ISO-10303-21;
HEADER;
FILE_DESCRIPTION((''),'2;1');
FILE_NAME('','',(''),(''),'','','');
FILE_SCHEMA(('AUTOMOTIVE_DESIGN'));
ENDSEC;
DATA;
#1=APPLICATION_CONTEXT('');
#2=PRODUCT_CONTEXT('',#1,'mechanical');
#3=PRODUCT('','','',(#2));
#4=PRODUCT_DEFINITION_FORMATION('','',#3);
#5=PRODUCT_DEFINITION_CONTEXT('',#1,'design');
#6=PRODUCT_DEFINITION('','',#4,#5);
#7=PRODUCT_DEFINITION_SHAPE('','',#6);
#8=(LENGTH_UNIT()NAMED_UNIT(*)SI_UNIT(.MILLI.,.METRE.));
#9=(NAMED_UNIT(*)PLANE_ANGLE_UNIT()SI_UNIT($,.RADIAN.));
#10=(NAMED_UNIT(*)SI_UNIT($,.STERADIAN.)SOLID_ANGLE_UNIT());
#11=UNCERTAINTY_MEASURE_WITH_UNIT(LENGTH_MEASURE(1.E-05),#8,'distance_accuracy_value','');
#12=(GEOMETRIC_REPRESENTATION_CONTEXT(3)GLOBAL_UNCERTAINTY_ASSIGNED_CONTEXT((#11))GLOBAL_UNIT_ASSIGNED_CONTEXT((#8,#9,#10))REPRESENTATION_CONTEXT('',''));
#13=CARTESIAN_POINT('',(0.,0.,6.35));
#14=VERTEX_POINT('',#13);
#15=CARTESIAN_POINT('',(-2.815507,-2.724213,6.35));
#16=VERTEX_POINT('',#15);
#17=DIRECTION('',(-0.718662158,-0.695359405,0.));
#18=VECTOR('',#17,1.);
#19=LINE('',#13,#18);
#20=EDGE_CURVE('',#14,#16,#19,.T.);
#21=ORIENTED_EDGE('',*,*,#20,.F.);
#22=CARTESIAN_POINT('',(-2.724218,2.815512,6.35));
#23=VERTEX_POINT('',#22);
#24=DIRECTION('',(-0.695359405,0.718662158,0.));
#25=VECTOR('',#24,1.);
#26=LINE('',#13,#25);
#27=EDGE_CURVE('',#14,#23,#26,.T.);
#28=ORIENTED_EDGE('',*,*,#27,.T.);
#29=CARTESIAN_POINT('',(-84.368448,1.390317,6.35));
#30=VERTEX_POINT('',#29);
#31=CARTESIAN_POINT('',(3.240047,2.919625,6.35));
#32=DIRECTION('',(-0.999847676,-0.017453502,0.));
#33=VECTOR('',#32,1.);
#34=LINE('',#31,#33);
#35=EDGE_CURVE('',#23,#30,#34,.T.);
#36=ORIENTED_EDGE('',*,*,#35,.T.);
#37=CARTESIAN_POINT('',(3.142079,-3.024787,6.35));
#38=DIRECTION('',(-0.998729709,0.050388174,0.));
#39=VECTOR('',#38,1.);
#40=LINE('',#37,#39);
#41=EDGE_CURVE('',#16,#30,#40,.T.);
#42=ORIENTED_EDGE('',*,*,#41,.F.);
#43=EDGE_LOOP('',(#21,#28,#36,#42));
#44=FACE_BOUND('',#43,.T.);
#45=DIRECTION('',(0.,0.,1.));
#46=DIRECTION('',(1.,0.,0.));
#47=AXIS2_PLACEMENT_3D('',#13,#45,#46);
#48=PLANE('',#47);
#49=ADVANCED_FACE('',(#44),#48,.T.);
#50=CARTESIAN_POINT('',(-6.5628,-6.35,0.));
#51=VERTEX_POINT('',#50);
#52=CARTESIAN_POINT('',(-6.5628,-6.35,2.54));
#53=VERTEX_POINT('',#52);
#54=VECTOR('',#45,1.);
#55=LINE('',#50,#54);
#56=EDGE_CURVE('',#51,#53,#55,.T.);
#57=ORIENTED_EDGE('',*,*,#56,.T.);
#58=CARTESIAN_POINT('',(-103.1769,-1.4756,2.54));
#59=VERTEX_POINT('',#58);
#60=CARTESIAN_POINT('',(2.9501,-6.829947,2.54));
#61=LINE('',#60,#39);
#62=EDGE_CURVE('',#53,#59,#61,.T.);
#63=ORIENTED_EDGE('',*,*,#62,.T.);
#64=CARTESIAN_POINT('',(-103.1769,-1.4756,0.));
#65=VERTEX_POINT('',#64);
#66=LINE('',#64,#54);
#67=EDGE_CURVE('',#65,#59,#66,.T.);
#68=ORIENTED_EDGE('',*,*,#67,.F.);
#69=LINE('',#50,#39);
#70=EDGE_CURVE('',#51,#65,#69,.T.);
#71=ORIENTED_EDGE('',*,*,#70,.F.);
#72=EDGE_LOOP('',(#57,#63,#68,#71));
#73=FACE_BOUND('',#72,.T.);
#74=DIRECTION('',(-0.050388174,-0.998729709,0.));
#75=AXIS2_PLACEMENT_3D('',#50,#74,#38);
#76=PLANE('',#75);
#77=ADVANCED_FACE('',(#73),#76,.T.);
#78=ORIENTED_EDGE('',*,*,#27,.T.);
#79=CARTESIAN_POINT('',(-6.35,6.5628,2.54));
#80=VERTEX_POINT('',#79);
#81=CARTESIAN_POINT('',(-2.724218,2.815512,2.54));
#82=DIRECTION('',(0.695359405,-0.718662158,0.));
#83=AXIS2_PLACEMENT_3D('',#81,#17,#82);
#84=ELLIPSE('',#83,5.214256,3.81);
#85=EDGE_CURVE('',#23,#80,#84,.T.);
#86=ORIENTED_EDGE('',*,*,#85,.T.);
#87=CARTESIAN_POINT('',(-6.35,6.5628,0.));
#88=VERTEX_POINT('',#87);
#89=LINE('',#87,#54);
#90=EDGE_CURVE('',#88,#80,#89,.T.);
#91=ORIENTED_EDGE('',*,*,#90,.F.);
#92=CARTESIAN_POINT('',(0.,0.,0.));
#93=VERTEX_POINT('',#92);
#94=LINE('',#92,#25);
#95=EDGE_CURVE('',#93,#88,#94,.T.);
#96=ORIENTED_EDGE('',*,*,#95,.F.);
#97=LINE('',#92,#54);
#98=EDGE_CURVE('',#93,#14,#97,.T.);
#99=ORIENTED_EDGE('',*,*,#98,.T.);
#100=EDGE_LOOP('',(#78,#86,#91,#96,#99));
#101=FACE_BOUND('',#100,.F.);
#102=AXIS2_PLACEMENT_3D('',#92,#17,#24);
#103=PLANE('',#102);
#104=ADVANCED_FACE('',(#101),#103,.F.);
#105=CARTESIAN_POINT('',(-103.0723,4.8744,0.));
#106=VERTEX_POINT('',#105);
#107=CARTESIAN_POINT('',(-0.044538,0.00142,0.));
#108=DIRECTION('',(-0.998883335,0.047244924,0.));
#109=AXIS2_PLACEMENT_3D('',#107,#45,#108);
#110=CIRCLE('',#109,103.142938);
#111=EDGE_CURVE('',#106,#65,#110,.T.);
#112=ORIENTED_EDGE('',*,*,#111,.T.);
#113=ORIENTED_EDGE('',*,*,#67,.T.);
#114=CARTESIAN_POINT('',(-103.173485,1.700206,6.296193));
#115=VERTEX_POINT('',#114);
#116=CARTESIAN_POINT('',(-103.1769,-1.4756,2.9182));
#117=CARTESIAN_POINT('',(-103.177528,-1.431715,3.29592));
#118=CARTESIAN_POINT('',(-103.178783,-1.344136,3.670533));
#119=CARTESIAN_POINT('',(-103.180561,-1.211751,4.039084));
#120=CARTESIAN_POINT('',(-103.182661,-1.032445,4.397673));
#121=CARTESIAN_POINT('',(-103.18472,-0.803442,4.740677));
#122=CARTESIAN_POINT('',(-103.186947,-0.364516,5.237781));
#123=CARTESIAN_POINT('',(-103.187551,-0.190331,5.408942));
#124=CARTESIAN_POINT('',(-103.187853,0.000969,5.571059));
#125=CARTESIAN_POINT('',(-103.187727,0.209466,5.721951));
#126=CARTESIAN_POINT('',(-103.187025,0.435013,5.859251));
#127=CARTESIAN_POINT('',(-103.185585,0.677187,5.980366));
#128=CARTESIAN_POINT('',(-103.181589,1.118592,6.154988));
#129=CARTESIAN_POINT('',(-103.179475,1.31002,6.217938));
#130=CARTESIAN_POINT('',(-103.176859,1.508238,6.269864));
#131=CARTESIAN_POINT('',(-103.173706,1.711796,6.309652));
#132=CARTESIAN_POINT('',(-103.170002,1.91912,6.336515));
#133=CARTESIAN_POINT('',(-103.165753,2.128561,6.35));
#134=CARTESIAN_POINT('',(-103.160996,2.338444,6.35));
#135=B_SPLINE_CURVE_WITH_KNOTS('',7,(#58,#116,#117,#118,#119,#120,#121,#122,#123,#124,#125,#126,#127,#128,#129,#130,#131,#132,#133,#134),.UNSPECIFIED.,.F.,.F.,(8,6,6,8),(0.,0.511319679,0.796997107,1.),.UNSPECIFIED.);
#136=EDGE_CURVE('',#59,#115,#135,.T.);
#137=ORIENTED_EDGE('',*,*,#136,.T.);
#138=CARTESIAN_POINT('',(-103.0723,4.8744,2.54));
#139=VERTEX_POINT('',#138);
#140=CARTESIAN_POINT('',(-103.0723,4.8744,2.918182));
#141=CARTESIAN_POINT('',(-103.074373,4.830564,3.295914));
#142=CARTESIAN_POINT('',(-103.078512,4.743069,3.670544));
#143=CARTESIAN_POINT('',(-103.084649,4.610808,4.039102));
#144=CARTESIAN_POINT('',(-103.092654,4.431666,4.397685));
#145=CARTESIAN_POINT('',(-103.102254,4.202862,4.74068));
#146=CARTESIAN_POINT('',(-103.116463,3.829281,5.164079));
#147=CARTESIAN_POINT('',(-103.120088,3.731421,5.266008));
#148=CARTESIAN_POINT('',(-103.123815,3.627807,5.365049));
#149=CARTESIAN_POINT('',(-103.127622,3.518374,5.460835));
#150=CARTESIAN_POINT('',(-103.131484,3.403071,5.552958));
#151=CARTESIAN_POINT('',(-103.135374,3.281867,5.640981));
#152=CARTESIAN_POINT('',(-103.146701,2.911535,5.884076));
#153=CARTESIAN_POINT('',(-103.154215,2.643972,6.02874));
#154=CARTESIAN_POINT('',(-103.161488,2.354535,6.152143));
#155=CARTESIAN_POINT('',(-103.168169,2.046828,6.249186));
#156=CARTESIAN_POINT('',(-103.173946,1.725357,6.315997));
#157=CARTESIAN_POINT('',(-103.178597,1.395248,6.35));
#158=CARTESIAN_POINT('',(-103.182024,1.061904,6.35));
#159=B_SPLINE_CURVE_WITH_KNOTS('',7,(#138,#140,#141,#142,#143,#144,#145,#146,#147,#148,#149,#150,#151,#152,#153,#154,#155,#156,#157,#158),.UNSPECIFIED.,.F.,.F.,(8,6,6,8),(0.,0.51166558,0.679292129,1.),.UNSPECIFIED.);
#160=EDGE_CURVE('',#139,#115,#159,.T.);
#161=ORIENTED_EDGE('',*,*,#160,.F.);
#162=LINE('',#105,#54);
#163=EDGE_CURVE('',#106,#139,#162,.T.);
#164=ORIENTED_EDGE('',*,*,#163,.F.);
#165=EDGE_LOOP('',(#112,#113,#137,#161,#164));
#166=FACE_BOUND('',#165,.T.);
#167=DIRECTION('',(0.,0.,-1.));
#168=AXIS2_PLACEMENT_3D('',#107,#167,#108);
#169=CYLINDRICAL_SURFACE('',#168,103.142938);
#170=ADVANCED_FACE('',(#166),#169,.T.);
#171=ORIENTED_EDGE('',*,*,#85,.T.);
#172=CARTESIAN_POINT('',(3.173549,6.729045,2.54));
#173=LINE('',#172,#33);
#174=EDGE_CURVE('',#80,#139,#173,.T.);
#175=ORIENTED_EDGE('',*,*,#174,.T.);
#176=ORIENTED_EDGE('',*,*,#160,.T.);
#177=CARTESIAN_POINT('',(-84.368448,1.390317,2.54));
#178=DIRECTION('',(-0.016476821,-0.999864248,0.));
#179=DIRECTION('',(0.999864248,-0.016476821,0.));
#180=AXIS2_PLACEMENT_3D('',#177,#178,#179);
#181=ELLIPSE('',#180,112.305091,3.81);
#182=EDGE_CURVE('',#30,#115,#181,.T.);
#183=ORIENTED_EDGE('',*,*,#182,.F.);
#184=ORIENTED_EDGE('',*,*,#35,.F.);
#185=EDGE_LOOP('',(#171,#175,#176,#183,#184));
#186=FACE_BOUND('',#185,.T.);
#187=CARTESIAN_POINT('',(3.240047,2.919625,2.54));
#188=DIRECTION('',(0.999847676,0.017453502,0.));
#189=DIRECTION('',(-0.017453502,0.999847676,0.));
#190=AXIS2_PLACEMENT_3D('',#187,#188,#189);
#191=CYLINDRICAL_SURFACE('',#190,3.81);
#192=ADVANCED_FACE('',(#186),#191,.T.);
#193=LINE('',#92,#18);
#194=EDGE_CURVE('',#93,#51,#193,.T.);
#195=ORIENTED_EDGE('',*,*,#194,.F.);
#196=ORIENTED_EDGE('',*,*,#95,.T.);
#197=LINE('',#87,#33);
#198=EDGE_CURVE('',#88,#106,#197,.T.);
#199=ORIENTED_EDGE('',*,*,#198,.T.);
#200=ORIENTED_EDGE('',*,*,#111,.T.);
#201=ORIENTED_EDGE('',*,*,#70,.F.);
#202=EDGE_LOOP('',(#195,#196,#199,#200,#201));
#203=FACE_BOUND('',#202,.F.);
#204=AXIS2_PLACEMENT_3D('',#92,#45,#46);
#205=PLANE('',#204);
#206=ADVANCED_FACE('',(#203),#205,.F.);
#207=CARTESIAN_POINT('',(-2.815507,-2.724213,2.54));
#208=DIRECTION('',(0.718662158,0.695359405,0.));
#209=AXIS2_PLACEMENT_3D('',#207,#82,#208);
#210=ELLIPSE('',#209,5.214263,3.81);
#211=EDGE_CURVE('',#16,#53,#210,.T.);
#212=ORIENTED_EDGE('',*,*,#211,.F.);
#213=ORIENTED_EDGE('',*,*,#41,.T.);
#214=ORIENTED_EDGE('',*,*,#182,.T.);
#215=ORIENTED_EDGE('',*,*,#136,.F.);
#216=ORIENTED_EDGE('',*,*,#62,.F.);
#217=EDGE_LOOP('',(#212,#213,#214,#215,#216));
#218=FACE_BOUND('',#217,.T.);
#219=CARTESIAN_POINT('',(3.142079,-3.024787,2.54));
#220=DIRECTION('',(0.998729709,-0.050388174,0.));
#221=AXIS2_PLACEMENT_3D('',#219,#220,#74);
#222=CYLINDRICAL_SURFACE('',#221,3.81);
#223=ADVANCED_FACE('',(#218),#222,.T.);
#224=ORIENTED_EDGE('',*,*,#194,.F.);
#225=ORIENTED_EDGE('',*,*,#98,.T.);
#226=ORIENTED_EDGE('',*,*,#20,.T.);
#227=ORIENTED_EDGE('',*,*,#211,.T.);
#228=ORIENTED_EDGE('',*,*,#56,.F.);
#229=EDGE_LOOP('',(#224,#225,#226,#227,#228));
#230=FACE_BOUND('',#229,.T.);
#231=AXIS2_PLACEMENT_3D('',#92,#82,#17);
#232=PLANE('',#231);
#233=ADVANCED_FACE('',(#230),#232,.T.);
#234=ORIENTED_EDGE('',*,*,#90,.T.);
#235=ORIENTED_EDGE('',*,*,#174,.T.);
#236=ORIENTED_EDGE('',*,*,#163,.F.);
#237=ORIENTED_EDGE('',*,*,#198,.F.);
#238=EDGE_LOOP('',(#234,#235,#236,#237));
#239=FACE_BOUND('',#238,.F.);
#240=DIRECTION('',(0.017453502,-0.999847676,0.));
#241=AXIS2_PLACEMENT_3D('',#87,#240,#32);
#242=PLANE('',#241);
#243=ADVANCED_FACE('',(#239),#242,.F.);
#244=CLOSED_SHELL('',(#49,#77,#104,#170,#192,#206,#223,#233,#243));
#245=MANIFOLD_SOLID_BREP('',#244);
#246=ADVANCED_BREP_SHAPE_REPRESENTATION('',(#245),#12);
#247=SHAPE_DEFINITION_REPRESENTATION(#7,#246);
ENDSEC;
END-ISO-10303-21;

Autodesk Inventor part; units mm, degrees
ref_plane "YZ Plane" through (0, 0, 0) normal (1, 0, 0) x (0, 1, 0)
ref_plane "XZ Plane" through (0, 0, 0) normal (0, 1, 0) x (-1, 0, 0)
ref_plane "XY Plane" through (0, 0, 0) normal (0, 0, 1) x (1, 0, 0)
sketch "Sketch1" plane through (0, 0, 0) normal (0, 0, 1) x (1, 0, 0)
  line L0 (0, 0) -> (-6.35, 6.5628)
  line L1 (-6.35, 6.5628) -> (-103.0723, 4.8744)
  line L2 (0, 0) -> (-6.5628, -6.35)
  line L3 (-6.5628, -6.35) -> (-103.1769, -1.4756)
  arc A0 (-103.0723, 4.8744) -> (-103.1769, -1.4756) centre (0, 0) ccw
  dimension "d0" = 103.1875
  dimension "d1" = 6.35
  dimension "d2" = 6.35
  dimension "d3" = 133.056
  dimension "d4" = 133.056
extrude "Extrusion1" add sketch "Sketch1" along normal blind 6.35
fillet "Fillet1" radius 3.81 2 edges at (-54.8699, -3.9128, 6.35) (-54.7112, 5.7186, 6.35)
properties part number "Lift_Support"
